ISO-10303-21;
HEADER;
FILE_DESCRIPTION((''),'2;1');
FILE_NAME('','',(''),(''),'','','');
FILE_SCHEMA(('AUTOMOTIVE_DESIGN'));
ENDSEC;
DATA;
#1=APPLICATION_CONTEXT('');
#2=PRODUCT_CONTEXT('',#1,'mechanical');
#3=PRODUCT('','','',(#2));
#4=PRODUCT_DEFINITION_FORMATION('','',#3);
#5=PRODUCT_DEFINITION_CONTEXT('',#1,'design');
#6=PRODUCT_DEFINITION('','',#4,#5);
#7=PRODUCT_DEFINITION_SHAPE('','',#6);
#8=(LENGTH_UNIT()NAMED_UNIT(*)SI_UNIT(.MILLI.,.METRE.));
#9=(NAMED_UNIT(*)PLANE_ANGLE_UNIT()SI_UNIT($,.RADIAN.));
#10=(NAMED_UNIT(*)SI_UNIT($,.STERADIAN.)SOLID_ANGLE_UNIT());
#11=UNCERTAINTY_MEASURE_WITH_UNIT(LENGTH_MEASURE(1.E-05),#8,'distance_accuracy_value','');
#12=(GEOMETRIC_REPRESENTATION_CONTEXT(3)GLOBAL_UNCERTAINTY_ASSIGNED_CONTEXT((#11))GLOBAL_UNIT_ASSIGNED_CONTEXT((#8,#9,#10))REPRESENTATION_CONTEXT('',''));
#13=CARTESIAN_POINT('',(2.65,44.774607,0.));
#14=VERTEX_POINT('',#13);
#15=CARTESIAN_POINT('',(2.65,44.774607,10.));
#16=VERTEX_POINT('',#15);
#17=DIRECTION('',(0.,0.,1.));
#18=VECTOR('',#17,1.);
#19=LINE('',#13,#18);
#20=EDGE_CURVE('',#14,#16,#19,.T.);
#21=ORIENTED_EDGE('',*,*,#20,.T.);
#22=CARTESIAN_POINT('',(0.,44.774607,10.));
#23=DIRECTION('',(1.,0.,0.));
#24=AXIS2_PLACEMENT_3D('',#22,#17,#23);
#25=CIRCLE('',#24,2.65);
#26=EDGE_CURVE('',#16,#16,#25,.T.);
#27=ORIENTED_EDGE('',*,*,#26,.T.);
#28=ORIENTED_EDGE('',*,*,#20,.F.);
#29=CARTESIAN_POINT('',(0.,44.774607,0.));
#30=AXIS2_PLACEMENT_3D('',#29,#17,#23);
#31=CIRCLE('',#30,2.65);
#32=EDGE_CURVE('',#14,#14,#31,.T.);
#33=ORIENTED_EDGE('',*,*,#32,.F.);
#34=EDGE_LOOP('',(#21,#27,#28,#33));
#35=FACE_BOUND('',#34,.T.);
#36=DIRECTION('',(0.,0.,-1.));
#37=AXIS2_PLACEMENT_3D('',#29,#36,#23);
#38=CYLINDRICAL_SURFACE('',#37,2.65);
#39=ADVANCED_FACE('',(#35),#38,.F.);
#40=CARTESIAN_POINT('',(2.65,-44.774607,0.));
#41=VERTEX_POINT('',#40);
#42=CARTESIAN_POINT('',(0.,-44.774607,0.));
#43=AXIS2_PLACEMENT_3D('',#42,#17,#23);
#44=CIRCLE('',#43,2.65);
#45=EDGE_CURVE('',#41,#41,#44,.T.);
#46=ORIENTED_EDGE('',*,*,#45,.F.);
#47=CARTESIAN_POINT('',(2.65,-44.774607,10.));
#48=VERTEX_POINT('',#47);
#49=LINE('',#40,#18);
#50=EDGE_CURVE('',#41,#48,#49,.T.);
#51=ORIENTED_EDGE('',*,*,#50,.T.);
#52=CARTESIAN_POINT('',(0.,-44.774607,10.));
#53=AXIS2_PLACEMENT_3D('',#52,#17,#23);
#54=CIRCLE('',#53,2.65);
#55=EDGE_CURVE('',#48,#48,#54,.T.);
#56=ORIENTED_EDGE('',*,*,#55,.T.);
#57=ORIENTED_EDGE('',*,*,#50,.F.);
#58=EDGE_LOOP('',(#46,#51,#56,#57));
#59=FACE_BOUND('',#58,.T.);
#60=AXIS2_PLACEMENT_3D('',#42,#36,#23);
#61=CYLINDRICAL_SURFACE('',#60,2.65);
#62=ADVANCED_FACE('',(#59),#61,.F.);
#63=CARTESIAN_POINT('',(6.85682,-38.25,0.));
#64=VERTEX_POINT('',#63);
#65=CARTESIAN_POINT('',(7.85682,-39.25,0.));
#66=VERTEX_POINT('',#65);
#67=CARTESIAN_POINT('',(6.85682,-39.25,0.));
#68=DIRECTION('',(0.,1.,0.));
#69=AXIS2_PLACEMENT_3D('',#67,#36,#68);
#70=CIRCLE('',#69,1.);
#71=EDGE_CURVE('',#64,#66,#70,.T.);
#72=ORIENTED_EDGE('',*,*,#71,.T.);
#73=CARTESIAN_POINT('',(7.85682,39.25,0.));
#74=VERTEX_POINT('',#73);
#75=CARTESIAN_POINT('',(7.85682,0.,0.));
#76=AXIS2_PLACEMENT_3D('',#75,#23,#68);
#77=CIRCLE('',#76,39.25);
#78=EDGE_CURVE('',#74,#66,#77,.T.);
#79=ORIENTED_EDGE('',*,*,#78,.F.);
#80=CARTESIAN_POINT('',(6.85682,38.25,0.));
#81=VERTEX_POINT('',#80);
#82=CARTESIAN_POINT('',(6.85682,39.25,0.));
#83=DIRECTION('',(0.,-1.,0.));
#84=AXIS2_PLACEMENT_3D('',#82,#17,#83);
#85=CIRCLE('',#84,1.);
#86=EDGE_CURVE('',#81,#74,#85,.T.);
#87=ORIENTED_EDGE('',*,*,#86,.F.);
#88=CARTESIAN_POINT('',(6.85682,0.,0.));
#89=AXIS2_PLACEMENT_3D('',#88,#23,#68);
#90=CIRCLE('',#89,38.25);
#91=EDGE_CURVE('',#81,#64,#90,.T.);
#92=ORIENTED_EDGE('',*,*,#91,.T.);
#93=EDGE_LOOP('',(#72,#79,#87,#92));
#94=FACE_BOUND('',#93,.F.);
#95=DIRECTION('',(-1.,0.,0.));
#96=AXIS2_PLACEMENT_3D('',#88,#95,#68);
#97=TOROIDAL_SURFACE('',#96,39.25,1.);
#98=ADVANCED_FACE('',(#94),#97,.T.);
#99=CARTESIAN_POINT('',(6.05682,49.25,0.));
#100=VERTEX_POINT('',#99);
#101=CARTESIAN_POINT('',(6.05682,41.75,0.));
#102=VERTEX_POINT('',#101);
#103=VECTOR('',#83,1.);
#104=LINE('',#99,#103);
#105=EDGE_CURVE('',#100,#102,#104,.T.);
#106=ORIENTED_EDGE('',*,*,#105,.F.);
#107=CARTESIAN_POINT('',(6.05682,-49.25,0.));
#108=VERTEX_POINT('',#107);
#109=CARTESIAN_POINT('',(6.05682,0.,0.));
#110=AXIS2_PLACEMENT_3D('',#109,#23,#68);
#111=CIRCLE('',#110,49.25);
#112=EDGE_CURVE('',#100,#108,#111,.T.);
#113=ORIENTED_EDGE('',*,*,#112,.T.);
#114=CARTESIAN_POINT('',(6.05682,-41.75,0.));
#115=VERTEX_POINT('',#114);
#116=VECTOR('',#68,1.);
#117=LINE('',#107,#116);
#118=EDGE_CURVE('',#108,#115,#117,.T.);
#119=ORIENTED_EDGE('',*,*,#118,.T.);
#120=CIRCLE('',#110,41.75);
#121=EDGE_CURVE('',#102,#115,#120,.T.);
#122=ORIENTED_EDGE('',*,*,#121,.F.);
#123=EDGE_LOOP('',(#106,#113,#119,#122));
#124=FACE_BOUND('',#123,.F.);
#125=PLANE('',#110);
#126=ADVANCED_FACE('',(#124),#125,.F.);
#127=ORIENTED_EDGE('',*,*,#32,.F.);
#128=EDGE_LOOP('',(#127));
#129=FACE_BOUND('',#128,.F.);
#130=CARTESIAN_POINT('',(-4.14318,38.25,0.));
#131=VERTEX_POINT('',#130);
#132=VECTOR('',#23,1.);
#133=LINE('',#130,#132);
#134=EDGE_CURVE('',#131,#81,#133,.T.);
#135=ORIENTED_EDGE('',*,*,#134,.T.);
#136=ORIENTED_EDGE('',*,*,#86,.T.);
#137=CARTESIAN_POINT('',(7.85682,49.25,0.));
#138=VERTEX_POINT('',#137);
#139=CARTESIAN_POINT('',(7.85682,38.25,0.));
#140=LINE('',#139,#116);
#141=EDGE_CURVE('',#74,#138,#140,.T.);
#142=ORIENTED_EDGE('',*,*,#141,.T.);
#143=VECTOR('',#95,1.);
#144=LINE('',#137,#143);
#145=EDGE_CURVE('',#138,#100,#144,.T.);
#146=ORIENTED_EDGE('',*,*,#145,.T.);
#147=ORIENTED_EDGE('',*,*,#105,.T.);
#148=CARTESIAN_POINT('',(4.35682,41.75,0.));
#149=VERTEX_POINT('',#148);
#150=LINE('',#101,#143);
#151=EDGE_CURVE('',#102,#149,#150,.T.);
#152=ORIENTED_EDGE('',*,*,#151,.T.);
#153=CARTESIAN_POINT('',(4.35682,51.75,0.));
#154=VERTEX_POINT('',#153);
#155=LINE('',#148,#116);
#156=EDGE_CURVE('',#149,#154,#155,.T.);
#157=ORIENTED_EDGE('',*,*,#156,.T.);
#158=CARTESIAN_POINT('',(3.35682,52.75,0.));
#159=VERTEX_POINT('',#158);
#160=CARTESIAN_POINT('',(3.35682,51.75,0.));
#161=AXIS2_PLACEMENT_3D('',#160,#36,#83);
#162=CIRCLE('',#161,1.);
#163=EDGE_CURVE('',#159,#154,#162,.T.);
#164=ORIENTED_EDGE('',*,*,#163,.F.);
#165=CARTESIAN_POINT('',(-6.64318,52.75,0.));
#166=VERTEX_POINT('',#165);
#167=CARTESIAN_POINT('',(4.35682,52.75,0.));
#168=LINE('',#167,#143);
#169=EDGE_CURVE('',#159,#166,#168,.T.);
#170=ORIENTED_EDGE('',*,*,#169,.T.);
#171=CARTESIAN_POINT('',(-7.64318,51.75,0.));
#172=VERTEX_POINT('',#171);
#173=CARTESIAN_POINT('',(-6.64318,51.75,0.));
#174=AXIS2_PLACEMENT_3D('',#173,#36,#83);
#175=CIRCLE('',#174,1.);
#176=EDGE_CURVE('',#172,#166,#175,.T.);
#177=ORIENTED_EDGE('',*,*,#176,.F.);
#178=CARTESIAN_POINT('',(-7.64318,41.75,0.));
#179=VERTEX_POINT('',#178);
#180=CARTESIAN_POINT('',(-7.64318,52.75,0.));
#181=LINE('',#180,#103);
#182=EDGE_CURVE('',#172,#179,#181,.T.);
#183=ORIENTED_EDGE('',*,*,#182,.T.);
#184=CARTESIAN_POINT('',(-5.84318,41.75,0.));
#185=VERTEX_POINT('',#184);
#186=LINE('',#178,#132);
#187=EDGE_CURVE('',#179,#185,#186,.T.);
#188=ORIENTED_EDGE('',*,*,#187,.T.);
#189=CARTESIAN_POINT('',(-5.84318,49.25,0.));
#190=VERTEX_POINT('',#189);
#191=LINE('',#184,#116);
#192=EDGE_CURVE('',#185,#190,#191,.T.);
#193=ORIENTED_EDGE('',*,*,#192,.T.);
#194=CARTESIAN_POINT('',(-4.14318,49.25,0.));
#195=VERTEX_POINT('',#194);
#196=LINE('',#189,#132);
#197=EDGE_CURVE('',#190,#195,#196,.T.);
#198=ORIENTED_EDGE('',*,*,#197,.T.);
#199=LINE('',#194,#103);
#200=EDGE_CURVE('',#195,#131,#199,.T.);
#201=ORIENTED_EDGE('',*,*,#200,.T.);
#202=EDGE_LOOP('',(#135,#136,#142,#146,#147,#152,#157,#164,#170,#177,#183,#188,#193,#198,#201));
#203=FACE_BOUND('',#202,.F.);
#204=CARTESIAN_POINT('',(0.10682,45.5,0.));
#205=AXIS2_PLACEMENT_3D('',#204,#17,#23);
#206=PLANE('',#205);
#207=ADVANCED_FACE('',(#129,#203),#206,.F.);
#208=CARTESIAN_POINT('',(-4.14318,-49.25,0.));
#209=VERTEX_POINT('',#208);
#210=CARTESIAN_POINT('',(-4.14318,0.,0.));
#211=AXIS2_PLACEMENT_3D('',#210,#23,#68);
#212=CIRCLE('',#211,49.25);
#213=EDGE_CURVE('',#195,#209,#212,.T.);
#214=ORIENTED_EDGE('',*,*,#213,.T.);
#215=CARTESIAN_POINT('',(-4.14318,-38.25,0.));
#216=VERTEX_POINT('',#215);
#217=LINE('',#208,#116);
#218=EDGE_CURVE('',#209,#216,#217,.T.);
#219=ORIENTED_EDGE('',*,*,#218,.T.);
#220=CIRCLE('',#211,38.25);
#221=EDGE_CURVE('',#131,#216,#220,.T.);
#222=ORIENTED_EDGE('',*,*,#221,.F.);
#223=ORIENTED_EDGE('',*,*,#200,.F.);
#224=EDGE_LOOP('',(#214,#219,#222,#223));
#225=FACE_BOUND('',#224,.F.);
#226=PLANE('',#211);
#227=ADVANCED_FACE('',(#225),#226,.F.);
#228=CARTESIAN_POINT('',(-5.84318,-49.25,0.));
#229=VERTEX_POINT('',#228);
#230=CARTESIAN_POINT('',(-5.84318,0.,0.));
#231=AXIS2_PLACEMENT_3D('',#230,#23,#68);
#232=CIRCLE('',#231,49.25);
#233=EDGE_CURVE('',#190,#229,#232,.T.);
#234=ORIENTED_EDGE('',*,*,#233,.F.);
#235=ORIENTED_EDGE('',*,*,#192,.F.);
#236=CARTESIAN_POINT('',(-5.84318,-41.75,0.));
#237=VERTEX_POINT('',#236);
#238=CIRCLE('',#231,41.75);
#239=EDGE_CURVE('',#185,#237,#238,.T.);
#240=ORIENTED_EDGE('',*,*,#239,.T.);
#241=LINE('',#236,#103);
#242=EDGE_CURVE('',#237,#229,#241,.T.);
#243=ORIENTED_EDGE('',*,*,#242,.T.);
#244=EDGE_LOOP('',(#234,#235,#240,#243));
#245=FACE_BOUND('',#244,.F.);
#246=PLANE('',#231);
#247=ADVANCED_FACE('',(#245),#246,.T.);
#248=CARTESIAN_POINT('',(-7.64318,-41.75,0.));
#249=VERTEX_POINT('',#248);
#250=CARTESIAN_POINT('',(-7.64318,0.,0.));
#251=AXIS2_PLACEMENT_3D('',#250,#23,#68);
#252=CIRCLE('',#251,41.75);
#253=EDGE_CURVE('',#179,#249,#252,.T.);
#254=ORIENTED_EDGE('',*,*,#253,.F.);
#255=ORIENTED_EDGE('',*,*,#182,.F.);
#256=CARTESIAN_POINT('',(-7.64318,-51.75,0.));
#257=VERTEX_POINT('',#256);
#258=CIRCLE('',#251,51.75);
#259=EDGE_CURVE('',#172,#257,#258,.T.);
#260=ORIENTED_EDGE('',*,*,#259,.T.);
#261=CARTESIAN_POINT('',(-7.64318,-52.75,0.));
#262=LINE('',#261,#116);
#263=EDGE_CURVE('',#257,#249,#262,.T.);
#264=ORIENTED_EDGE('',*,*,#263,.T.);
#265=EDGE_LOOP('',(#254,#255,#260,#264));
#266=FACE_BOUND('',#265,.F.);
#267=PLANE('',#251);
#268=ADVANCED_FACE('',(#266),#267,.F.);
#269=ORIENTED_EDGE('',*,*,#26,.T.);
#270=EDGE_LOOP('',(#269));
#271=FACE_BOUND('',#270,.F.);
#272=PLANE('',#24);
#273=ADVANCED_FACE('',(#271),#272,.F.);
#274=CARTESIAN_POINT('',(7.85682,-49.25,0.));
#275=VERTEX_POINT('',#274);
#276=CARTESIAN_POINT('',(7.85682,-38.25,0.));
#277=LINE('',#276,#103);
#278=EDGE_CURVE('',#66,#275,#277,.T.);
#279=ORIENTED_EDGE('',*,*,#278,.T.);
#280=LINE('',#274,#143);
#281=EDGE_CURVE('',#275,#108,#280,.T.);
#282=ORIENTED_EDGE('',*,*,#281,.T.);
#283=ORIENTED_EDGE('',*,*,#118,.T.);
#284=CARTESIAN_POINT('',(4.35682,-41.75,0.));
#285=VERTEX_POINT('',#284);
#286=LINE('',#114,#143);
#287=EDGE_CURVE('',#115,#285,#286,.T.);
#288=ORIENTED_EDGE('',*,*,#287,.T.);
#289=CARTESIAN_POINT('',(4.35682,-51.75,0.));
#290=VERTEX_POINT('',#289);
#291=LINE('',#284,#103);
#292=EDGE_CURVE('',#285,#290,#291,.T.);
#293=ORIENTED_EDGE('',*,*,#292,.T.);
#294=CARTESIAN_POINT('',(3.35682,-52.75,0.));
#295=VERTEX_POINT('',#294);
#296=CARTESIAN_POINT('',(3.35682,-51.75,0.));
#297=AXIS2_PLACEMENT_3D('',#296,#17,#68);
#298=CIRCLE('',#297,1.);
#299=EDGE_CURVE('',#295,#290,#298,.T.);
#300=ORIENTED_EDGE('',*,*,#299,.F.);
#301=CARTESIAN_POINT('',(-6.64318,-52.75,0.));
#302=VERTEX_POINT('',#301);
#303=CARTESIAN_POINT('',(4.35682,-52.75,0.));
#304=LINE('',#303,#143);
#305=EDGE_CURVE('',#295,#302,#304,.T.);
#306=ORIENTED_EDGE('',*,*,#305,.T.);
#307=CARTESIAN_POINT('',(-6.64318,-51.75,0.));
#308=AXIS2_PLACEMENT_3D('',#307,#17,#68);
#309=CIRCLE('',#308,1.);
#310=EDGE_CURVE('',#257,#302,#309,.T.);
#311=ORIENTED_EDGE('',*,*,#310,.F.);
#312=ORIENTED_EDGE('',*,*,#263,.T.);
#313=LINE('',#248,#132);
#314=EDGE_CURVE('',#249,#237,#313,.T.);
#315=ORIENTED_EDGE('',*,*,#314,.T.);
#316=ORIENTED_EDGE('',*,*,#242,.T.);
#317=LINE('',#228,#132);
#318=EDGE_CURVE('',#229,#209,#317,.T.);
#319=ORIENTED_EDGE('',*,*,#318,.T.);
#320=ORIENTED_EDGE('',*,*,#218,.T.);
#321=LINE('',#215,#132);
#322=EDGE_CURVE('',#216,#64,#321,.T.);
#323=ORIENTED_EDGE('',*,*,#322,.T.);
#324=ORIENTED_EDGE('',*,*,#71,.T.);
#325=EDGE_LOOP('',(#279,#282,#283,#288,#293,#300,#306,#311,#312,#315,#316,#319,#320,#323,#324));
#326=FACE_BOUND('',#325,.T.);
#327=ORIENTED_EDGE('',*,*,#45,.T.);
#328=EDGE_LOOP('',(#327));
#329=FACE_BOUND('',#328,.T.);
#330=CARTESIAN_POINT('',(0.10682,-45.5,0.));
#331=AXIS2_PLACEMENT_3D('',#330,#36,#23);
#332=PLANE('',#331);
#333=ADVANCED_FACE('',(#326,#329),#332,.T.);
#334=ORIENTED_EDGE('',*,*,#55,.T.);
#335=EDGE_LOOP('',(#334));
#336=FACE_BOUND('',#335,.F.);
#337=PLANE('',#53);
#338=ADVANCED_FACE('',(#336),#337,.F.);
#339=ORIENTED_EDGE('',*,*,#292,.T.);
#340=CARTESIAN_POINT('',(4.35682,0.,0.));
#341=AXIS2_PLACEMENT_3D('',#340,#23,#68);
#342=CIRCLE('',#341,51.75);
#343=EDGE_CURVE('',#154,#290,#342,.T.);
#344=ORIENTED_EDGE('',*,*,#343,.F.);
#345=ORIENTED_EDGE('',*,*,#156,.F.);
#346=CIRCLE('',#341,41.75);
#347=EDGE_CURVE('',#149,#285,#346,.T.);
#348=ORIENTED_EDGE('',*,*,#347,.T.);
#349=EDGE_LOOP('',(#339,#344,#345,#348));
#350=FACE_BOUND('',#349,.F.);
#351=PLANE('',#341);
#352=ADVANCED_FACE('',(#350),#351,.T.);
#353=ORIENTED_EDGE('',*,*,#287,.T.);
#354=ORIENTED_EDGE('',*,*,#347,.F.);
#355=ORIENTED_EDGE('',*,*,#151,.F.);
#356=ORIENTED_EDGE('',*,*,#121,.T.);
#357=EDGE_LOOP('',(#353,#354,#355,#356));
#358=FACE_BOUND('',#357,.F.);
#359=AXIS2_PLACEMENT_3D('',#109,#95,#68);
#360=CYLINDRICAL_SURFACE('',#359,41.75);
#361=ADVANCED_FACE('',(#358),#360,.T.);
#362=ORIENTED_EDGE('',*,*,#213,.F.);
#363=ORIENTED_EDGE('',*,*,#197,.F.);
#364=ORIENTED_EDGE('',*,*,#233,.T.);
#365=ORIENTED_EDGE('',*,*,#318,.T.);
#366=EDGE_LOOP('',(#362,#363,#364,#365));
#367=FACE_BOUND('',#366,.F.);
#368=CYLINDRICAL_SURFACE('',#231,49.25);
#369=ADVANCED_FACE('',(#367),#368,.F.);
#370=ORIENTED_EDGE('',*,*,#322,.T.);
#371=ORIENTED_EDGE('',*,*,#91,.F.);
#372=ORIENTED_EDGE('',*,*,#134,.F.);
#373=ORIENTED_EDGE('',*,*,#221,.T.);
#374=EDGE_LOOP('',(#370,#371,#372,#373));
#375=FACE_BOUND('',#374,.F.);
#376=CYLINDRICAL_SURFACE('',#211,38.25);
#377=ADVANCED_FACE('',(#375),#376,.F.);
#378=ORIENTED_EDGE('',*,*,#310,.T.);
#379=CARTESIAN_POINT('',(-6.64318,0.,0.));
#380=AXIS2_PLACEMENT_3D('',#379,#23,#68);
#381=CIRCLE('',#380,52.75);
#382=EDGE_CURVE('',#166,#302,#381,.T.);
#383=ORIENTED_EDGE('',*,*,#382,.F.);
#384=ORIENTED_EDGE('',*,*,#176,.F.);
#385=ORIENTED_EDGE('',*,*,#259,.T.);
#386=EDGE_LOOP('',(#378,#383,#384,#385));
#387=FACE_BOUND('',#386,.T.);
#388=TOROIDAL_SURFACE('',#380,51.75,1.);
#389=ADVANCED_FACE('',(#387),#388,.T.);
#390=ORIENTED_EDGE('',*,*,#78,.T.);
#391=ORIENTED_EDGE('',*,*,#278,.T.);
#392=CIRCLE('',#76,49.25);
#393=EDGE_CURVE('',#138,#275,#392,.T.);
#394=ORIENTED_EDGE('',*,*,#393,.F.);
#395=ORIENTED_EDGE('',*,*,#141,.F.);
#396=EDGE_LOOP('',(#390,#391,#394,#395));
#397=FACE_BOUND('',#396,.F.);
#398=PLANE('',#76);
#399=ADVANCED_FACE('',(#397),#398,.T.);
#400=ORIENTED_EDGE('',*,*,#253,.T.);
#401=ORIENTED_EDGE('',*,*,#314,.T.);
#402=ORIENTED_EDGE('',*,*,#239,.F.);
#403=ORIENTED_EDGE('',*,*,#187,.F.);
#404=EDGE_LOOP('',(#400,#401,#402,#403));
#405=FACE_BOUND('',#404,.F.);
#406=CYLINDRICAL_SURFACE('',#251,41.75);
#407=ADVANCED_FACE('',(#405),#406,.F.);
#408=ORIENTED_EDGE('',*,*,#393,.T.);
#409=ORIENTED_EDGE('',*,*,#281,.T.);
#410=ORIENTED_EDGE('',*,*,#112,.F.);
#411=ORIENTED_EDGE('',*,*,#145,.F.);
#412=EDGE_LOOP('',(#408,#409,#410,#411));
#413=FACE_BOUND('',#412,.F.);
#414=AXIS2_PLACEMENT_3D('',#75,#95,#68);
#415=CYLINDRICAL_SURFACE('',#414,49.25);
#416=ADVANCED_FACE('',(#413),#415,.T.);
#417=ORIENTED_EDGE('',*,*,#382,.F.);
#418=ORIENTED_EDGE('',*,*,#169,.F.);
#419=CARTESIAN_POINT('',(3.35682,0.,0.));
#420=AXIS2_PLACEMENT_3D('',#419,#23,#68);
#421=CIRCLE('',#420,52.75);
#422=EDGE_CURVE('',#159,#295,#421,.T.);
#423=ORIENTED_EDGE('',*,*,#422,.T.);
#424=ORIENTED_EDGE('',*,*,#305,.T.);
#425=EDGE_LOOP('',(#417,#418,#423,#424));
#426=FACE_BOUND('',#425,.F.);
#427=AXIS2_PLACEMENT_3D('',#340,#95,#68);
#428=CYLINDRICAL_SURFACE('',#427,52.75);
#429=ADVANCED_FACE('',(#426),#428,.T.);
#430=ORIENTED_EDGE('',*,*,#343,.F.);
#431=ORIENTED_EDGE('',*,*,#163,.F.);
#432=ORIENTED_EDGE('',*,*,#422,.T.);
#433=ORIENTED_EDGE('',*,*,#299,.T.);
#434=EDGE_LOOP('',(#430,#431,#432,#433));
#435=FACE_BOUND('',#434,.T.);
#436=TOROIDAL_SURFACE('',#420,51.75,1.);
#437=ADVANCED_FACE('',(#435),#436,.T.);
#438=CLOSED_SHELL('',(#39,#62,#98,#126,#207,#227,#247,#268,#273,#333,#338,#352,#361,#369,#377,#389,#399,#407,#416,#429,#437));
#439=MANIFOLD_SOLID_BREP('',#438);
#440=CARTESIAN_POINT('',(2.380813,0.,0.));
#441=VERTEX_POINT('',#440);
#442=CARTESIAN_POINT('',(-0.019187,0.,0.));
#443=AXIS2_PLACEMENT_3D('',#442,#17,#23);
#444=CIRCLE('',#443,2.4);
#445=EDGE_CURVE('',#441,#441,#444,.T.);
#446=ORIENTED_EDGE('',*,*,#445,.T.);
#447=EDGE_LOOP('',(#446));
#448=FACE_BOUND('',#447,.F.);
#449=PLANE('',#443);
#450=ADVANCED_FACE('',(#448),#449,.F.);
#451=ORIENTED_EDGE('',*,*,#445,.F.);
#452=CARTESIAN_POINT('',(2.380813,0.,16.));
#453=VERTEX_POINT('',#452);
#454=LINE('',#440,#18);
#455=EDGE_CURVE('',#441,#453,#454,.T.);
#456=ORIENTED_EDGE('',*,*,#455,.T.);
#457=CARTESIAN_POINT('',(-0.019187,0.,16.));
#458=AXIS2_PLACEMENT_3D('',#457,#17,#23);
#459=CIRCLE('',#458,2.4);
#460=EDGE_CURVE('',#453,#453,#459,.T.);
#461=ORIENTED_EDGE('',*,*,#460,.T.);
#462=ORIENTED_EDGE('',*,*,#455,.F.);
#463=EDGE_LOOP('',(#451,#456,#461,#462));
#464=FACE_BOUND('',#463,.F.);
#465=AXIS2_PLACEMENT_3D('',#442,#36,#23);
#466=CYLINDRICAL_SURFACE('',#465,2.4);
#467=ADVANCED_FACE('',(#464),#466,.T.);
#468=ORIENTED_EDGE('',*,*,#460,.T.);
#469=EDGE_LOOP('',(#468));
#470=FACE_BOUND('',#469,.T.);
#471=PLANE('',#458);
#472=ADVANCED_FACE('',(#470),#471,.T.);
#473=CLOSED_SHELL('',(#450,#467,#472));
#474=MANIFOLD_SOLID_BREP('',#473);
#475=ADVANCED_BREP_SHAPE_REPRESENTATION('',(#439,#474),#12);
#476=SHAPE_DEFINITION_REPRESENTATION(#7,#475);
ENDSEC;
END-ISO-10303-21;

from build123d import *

# Parameters (mm, degrees)
F1_ANGLE = 180
F2_R     = 2.65
F3_DEPTH = 10
F4_R     = 2.4
F5_DEPTH = 16
F6_R     = 1


# Not quite as in the source:
# - a feature names something its author has since deleted; it is built from what else it names


with BuildPart() as f1:
    # F0 (on Top) → F1 (revolve)
    with BuildSketch(Plane.XY):
        Polygon((-7.6431803294, 52.75), (-7.6431803294, 41.75), (-5.8431803294, 41.75), (-5.8431803294, 49.25), (-4.1431803294, 49.25), (-4.1431803294, 38.25), (7.8568196706, 38.25), (7.8568196706, 49.25), (6.0568196706, 49.25), (6.0568196706, 41.75), (4.3568196706, 41.75), (4.3568196706, 52.75), align=None)
    revolve(axis=Axis((-8.8856732473, 0, 0), (1, 0, 0)), revolution_arc=F1_ANGLE)

    # F2 (on Top) → F3 (cut)
    with BuildSketch(Plane.XY):
        with Locations((0, 44.7746068239)):
            Circle(F2_R)
        with Locations((0, -44.7746068239)):
            Circle(F2_R)
    extrude(amount=F3_DEPTH, mode=Mode.SUBTRACT)

    # F6
    f6_edges = [f1.edges().sort_by_distance(p)[0] for p in [
        (7.85682, 0, 38.25),
        (4.35682, 0, 52.75),
        (-7.64318, 0, 52.75),
    ]]
    fillet(f6_edges, radius=F6_R)


with BuildPart() as f5:
    # F4 (on Top) → F5 (new body)
    with BuildSketch(Plane.XY):
        with Locations((-0.019186803, 0)):
            Circle(F4_R)
    extrude(amount=F5_DEPTH)


solid = Compound([f1.part, f5.part])
